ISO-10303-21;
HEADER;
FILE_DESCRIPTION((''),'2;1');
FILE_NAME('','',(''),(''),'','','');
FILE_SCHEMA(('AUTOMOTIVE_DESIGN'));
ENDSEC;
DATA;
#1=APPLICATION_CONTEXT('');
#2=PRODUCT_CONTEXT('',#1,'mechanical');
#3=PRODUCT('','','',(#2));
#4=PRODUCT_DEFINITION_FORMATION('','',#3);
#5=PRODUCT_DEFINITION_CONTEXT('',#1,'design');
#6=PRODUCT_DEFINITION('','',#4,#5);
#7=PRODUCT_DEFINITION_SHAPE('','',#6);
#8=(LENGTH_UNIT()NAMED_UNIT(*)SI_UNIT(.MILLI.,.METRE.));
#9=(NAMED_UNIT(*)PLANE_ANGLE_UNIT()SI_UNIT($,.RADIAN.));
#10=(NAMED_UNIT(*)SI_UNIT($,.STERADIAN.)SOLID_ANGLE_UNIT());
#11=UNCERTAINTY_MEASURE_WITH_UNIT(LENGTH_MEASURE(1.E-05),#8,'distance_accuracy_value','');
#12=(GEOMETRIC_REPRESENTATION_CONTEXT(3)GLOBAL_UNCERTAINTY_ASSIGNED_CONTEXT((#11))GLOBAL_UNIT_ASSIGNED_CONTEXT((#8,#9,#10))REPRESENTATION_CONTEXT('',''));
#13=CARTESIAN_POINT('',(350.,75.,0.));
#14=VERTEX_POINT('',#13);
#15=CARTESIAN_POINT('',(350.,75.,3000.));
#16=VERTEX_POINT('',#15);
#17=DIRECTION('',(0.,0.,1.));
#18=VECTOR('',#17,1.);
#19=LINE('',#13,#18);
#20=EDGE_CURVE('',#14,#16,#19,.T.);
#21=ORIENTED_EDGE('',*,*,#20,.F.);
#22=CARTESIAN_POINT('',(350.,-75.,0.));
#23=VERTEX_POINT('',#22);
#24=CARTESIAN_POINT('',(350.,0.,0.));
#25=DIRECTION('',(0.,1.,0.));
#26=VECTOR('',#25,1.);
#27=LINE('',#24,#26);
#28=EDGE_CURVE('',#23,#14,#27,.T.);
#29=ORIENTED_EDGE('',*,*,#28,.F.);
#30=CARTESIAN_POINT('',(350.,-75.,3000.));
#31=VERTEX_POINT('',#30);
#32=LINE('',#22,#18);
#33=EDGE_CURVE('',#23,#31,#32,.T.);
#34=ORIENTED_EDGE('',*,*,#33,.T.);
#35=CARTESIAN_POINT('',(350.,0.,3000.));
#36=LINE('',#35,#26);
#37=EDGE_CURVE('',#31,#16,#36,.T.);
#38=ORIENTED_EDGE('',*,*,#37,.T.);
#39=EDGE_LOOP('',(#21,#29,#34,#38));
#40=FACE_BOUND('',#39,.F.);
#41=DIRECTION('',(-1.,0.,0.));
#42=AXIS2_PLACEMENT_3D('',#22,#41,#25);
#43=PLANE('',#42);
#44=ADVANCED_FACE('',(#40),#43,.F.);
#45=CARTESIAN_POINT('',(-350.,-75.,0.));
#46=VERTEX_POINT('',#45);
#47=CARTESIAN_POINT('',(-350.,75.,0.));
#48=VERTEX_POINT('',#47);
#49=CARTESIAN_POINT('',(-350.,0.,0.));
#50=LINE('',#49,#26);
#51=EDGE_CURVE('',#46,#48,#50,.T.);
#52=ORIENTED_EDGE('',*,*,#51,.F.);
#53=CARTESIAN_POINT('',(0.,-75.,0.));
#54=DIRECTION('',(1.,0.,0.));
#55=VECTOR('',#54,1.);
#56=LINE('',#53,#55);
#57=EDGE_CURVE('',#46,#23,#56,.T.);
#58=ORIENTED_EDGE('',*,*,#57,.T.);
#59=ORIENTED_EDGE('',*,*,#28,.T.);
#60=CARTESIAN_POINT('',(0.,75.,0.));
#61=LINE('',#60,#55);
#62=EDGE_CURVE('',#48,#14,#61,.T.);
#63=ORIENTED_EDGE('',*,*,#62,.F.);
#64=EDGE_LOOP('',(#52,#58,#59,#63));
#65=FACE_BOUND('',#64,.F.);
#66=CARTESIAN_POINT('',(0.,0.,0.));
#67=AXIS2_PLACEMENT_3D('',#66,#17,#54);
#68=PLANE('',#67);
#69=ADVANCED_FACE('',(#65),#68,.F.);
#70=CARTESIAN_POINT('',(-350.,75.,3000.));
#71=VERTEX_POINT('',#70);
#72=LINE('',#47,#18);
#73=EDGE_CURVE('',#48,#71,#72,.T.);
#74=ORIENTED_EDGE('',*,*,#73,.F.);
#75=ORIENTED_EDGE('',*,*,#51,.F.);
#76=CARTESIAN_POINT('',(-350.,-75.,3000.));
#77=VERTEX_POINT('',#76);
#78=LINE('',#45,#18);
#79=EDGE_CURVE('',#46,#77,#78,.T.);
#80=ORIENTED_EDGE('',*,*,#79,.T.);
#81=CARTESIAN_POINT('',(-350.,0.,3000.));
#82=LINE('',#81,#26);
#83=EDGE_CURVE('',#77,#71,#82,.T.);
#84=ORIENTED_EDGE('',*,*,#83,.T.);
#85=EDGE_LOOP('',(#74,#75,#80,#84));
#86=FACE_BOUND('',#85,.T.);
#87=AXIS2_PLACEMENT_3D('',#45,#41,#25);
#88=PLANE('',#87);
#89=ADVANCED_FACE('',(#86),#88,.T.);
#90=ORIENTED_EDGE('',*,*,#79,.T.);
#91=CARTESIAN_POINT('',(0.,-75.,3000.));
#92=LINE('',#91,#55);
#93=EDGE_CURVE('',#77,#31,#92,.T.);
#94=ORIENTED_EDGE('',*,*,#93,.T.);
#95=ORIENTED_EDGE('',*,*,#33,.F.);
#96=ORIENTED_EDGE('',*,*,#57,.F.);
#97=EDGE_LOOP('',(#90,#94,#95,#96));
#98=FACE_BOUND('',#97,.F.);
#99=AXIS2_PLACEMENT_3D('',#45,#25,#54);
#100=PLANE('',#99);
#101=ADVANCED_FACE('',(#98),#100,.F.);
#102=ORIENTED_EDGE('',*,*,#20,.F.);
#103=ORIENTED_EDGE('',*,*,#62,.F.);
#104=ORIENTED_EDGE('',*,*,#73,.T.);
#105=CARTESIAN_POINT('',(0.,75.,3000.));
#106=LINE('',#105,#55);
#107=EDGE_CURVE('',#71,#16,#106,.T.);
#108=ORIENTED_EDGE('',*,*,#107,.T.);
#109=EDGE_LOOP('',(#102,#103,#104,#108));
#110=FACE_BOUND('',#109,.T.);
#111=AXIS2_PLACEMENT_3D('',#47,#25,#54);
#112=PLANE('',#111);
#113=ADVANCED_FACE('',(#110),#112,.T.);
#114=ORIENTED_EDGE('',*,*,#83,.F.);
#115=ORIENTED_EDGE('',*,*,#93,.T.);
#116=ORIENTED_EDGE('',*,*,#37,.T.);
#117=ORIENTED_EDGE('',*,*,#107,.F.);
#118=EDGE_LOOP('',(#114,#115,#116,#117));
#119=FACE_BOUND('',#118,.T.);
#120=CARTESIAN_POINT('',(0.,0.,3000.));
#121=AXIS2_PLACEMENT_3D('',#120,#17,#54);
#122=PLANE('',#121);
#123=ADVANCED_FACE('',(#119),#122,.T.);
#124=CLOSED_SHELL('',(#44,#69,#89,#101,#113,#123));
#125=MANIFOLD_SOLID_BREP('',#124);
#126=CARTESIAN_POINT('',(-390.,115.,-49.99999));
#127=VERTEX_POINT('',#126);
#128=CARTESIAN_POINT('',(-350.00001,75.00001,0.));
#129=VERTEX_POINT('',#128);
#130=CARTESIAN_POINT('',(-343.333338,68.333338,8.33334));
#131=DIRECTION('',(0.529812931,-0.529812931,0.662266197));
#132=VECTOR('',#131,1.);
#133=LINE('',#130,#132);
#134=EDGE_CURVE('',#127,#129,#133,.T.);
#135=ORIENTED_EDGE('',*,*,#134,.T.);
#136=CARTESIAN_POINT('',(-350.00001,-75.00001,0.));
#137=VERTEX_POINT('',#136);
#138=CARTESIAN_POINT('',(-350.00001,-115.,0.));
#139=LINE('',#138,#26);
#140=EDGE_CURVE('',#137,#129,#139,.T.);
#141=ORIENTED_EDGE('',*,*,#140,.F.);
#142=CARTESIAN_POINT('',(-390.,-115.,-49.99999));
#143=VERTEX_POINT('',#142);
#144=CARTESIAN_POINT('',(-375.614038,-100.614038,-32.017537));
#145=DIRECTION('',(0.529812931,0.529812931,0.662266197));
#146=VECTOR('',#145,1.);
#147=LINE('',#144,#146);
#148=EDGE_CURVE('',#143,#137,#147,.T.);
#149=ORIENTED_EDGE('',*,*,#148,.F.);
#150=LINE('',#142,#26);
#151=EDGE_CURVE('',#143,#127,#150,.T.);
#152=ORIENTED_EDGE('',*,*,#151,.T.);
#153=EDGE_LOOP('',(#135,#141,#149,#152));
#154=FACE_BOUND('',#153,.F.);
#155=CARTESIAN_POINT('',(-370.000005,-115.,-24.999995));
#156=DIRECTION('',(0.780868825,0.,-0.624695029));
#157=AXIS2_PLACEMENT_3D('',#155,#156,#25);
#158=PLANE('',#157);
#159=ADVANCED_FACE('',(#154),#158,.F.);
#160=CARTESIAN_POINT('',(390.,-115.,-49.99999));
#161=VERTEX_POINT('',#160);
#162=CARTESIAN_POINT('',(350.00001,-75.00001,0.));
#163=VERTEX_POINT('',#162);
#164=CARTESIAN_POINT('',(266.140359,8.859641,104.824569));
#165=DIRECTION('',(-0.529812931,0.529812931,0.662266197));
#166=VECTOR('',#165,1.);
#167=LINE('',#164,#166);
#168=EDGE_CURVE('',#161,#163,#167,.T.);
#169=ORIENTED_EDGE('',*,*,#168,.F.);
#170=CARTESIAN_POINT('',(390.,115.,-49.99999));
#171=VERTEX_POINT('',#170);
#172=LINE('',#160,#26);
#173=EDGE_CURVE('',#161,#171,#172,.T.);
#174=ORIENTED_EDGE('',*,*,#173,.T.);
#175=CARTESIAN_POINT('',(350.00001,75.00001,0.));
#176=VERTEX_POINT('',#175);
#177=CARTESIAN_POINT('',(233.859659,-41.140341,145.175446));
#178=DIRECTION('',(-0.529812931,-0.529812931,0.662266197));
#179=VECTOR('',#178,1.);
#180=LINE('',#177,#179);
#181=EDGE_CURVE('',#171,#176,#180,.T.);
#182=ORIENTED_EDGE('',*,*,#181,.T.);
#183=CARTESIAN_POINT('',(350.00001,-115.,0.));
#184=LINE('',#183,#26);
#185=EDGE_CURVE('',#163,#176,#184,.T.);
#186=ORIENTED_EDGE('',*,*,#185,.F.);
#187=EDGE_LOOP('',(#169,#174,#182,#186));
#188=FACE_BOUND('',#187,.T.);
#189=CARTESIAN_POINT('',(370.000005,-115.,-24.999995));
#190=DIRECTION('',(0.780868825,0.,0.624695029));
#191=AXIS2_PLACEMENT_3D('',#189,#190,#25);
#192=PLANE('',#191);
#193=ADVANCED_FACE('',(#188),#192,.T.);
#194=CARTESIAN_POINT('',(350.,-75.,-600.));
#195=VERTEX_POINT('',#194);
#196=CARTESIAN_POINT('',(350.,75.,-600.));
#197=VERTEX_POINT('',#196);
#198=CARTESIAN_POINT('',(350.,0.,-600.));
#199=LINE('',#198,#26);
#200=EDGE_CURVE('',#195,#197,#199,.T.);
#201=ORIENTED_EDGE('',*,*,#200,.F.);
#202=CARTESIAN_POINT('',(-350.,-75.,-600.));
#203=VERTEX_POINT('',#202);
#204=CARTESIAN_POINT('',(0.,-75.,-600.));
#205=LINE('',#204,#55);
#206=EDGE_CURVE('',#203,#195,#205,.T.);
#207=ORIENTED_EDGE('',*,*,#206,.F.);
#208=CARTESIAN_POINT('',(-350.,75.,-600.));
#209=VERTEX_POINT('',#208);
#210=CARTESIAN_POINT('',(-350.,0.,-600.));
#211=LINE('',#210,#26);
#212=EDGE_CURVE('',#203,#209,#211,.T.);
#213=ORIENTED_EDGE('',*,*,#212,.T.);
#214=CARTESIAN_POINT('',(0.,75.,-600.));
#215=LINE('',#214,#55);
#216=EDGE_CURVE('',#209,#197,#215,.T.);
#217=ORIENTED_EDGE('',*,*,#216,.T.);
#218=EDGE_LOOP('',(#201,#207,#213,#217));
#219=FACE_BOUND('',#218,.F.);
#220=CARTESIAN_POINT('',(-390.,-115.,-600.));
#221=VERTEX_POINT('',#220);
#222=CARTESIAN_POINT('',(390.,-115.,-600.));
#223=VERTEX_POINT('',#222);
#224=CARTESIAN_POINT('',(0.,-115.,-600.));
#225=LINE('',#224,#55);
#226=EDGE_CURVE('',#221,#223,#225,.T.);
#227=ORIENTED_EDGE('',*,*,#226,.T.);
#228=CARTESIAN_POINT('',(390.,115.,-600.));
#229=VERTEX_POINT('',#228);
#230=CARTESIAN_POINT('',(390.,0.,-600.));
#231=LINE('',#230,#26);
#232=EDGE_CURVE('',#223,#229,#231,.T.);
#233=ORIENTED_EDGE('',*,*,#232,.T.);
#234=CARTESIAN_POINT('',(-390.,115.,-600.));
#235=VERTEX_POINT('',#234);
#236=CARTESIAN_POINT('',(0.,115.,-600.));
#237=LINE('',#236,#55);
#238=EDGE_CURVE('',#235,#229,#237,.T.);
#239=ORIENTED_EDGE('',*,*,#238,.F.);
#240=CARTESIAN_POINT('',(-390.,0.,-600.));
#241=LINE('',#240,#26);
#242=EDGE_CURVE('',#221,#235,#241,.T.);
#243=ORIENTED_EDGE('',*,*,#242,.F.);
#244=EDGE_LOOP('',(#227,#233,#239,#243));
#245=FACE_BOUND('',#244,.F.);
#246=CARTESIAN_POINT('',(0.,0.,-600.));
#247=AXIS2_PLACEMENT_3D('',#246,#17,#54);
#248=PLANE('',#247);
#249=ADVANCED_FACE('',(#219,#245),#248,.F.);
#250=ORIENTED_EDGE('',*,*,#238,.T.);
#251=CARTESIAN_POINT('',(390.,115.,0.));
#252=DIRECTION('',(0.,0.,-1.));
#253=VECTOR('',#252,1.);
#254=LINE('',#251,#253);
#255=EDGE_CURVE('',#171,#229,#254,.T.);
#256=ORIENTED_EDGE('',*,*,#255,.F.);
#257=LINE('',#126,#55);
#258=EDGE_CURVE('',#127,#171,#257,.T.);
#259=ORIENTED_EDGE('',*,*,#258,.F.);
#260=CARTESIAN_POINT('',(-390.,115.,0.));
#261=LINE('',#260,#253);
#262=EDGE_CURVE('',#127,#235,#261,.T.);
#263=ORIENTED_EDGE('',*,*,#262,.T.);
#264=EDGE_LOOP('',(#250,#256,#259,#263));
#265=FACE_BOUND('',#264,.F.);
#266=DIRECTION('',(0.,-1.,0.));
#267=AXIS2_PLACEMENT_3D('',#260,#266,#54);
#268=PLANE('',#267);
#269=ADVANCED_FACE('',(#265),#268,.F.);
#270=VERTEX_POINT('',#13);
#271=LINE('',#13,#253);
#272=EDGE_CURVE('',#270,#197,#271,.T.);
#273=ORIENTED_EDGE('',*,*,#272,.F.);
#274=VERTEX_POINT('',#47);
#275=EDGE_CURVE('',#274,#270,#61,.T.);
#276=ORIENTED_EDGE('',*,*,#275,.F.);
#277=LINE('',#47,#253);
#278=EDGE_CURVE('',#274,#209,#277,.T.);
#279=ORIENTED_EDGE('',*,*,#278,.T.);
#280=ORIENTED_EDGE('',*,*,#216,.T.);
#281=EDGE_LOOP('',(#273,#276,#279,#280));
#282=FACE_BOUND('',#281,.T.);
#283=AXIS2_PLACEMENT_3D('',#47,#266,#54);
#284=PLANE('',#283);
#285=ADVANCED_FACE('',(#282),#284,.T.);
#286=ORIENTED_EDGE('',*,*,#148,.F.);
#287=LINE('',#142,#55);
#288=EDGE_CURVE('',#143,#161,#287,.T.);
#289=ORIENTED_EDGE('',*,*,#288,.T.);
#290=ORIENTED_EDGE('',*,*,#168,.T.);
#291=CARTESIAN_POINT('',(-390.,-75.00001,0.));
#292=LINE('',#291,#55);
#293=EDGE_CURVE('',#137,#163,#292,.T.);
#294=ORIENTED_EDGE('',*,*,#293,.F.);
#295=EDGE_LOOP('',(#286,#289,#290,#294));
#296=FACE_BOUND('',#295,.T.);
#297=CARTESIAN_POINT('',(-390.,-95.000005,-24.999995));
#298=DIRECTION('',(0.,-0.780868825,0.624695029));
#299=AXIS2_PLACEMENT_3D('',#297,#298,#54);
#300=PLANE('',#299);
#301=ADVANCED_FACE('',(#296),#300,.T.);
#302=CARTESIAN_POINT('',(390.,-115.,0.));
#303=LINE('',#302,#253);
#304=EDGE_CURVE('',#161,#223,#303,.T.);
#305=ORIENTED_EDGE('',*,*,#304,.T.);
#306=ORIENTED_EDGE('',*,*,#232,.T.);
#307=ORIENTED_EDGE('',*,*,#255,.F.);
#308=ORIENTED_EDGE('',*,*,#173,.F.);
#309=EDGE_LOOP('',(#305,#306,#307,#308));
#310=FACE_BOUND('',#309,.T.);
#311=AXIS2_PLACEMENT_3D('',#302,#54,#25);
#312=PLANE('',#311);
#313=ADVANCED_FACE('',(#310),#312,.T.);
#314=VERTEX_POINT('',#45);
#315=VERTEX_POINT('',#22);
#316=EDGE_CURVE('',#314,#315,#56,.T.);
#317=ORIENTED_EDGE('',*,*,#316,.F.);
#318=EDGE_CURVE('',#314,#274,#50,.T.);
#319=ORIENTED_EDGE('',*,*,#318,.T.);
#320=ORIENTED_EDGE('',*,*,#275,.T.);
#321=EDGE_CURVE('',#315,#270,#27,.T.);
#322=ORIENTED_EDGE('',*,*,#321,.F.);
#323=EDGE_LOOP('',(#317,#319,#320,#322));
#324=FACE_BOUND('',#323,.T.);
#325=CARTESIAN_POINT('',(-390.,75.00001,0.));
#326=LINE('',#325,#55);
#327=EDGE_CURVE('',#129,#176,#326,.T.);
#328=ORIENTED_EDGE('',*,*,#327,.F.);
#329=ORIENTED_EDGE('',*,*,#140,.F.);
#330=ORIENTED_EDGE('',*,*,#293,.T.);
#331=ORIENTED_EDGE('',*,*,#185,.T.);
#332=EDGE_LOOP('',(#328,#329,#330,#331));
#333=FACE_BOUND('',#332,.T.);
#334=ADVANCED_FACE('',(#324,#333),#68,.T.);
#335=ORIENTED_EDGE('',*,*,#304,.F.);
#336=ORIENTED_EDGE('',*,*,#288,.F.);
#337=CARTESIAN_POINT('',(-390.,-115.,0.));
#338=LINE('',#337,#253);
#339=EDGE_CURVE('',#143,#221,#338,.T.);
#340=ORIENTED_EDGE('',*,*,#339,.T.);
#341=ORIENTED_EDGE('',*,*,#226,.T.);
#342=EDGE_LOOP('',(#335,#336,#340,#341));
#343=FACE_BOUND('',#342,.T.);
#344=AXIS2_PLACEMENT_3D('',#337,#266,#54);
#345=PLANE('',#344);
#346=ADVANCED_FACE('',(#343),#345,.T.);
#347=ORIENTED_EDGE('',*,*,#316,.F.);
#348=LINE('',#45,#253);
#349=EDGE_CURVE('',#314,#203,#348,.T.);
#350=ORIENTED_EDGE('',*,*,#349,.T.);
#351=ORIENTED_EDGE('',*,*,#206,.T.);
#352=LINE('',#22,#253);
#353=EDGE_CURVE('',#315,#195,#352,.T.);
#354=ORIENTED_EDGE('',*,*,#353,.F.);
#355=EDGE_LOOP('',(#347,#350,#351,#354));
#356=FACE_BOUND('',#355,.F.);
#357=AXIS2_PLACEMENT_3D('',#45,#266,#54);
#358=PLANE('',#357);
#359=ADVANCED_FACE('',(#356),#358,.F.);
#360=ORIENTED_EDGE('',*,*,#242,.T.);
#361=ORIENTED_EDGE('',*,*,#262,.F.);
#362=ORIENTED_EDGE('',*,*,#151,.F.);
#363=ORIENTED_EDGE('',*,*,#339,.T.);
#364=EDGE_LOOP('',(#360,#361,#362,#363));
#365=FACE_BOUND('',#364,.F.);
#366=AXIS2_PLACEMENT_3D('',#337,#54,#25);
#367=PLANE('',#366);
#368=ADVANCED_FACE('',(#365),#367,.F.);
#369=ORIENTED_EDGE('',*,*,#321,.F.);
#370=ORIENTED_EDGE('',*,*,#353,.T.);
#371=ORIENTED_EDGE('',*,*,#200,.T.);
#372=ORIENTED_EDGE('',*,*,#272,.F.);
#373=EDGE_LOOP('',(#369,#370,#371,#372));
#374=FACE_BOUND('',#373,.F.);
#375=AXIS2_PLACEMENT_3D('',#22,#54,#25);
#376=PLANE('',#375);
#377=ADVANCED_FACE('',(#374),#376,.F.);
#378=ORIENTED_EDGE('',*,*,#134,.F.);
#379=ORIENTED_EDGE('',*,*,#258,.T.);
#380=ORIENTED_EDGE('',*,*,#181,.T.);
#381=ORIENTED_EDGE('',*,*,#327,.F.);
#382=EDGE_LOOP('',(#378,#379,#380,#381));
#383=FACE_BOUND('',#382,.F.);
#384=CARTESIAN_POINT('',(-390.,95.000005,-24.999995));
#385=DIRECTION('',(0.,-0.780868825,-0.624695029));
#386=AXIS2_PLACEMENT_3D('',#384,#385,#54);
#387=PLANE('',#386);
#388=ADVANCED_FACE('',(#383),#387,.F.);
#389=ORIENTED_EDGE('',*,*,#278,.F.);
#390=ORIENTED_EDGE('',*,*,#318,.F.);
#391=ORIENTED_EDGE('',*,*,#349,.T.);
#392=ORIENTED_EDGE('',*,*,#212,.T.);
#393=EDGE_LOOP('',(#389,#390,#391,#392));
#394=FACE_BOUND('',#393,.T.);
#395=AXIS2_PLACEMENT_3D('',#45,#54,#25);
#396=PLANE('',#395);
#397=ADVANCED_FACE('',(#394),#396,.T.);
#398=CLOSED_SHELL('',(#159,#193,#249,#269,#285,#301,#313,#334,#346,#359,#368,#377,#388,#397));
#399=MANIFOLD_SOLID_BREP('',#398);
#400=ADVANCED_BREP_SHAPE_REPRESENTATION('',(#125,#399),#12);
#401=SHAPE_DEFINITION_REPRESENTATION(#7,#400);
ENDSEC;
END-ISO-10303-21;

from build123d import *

# Parameters (mm, degrees)
F0_W     = 700
F0_H     = 150
F1_DEPTH = 3000
F0_W_2   = 780
F0_H_2   = 230
F2_DEPTH = 600
F3_SIZE2 = 39.99999
F3_SIZE  = 49.99999


# Not quite as in the source:
# - a fillet or chamfer is up to 0.001 mm smaller than in the source, because OpenCascade refuses the exact size


with BuildPart() as f1:
    # F0 (on Top) → F1 (new body)
    with BuildSketch(Plane.XY):
        Rectangle(F0_W, F0_H)
    extrude(amount=F1_DEPTH)


with BuildPart() as f2:
    # F0 (on Top) → F2 (new body)
    with BuildSketch(Plane.XY):
        Rectangle(F0_W_2, F0_H_2)
        Rectangle(F0_W, F0_H, mode=Mode.SUBTRACT)
    extrude(amount=-F2_DEPTH)

    # F3 (size 50 and 40 in the source; OpenCascade refuses exactly that, so slightly less here)
    f3_edges = [f2.edges().sort_by_distance(p)[0] for p in [
        (0, -115, 0),
        (390, 0, 0),
        (-390, 0, 0),
        (0, 115, 0),
    ]]
    chamfer(f3_edges, length=F3_SIZE, length2=F3_SIZE2)


solid = Compound([f1.part, f2.part])
